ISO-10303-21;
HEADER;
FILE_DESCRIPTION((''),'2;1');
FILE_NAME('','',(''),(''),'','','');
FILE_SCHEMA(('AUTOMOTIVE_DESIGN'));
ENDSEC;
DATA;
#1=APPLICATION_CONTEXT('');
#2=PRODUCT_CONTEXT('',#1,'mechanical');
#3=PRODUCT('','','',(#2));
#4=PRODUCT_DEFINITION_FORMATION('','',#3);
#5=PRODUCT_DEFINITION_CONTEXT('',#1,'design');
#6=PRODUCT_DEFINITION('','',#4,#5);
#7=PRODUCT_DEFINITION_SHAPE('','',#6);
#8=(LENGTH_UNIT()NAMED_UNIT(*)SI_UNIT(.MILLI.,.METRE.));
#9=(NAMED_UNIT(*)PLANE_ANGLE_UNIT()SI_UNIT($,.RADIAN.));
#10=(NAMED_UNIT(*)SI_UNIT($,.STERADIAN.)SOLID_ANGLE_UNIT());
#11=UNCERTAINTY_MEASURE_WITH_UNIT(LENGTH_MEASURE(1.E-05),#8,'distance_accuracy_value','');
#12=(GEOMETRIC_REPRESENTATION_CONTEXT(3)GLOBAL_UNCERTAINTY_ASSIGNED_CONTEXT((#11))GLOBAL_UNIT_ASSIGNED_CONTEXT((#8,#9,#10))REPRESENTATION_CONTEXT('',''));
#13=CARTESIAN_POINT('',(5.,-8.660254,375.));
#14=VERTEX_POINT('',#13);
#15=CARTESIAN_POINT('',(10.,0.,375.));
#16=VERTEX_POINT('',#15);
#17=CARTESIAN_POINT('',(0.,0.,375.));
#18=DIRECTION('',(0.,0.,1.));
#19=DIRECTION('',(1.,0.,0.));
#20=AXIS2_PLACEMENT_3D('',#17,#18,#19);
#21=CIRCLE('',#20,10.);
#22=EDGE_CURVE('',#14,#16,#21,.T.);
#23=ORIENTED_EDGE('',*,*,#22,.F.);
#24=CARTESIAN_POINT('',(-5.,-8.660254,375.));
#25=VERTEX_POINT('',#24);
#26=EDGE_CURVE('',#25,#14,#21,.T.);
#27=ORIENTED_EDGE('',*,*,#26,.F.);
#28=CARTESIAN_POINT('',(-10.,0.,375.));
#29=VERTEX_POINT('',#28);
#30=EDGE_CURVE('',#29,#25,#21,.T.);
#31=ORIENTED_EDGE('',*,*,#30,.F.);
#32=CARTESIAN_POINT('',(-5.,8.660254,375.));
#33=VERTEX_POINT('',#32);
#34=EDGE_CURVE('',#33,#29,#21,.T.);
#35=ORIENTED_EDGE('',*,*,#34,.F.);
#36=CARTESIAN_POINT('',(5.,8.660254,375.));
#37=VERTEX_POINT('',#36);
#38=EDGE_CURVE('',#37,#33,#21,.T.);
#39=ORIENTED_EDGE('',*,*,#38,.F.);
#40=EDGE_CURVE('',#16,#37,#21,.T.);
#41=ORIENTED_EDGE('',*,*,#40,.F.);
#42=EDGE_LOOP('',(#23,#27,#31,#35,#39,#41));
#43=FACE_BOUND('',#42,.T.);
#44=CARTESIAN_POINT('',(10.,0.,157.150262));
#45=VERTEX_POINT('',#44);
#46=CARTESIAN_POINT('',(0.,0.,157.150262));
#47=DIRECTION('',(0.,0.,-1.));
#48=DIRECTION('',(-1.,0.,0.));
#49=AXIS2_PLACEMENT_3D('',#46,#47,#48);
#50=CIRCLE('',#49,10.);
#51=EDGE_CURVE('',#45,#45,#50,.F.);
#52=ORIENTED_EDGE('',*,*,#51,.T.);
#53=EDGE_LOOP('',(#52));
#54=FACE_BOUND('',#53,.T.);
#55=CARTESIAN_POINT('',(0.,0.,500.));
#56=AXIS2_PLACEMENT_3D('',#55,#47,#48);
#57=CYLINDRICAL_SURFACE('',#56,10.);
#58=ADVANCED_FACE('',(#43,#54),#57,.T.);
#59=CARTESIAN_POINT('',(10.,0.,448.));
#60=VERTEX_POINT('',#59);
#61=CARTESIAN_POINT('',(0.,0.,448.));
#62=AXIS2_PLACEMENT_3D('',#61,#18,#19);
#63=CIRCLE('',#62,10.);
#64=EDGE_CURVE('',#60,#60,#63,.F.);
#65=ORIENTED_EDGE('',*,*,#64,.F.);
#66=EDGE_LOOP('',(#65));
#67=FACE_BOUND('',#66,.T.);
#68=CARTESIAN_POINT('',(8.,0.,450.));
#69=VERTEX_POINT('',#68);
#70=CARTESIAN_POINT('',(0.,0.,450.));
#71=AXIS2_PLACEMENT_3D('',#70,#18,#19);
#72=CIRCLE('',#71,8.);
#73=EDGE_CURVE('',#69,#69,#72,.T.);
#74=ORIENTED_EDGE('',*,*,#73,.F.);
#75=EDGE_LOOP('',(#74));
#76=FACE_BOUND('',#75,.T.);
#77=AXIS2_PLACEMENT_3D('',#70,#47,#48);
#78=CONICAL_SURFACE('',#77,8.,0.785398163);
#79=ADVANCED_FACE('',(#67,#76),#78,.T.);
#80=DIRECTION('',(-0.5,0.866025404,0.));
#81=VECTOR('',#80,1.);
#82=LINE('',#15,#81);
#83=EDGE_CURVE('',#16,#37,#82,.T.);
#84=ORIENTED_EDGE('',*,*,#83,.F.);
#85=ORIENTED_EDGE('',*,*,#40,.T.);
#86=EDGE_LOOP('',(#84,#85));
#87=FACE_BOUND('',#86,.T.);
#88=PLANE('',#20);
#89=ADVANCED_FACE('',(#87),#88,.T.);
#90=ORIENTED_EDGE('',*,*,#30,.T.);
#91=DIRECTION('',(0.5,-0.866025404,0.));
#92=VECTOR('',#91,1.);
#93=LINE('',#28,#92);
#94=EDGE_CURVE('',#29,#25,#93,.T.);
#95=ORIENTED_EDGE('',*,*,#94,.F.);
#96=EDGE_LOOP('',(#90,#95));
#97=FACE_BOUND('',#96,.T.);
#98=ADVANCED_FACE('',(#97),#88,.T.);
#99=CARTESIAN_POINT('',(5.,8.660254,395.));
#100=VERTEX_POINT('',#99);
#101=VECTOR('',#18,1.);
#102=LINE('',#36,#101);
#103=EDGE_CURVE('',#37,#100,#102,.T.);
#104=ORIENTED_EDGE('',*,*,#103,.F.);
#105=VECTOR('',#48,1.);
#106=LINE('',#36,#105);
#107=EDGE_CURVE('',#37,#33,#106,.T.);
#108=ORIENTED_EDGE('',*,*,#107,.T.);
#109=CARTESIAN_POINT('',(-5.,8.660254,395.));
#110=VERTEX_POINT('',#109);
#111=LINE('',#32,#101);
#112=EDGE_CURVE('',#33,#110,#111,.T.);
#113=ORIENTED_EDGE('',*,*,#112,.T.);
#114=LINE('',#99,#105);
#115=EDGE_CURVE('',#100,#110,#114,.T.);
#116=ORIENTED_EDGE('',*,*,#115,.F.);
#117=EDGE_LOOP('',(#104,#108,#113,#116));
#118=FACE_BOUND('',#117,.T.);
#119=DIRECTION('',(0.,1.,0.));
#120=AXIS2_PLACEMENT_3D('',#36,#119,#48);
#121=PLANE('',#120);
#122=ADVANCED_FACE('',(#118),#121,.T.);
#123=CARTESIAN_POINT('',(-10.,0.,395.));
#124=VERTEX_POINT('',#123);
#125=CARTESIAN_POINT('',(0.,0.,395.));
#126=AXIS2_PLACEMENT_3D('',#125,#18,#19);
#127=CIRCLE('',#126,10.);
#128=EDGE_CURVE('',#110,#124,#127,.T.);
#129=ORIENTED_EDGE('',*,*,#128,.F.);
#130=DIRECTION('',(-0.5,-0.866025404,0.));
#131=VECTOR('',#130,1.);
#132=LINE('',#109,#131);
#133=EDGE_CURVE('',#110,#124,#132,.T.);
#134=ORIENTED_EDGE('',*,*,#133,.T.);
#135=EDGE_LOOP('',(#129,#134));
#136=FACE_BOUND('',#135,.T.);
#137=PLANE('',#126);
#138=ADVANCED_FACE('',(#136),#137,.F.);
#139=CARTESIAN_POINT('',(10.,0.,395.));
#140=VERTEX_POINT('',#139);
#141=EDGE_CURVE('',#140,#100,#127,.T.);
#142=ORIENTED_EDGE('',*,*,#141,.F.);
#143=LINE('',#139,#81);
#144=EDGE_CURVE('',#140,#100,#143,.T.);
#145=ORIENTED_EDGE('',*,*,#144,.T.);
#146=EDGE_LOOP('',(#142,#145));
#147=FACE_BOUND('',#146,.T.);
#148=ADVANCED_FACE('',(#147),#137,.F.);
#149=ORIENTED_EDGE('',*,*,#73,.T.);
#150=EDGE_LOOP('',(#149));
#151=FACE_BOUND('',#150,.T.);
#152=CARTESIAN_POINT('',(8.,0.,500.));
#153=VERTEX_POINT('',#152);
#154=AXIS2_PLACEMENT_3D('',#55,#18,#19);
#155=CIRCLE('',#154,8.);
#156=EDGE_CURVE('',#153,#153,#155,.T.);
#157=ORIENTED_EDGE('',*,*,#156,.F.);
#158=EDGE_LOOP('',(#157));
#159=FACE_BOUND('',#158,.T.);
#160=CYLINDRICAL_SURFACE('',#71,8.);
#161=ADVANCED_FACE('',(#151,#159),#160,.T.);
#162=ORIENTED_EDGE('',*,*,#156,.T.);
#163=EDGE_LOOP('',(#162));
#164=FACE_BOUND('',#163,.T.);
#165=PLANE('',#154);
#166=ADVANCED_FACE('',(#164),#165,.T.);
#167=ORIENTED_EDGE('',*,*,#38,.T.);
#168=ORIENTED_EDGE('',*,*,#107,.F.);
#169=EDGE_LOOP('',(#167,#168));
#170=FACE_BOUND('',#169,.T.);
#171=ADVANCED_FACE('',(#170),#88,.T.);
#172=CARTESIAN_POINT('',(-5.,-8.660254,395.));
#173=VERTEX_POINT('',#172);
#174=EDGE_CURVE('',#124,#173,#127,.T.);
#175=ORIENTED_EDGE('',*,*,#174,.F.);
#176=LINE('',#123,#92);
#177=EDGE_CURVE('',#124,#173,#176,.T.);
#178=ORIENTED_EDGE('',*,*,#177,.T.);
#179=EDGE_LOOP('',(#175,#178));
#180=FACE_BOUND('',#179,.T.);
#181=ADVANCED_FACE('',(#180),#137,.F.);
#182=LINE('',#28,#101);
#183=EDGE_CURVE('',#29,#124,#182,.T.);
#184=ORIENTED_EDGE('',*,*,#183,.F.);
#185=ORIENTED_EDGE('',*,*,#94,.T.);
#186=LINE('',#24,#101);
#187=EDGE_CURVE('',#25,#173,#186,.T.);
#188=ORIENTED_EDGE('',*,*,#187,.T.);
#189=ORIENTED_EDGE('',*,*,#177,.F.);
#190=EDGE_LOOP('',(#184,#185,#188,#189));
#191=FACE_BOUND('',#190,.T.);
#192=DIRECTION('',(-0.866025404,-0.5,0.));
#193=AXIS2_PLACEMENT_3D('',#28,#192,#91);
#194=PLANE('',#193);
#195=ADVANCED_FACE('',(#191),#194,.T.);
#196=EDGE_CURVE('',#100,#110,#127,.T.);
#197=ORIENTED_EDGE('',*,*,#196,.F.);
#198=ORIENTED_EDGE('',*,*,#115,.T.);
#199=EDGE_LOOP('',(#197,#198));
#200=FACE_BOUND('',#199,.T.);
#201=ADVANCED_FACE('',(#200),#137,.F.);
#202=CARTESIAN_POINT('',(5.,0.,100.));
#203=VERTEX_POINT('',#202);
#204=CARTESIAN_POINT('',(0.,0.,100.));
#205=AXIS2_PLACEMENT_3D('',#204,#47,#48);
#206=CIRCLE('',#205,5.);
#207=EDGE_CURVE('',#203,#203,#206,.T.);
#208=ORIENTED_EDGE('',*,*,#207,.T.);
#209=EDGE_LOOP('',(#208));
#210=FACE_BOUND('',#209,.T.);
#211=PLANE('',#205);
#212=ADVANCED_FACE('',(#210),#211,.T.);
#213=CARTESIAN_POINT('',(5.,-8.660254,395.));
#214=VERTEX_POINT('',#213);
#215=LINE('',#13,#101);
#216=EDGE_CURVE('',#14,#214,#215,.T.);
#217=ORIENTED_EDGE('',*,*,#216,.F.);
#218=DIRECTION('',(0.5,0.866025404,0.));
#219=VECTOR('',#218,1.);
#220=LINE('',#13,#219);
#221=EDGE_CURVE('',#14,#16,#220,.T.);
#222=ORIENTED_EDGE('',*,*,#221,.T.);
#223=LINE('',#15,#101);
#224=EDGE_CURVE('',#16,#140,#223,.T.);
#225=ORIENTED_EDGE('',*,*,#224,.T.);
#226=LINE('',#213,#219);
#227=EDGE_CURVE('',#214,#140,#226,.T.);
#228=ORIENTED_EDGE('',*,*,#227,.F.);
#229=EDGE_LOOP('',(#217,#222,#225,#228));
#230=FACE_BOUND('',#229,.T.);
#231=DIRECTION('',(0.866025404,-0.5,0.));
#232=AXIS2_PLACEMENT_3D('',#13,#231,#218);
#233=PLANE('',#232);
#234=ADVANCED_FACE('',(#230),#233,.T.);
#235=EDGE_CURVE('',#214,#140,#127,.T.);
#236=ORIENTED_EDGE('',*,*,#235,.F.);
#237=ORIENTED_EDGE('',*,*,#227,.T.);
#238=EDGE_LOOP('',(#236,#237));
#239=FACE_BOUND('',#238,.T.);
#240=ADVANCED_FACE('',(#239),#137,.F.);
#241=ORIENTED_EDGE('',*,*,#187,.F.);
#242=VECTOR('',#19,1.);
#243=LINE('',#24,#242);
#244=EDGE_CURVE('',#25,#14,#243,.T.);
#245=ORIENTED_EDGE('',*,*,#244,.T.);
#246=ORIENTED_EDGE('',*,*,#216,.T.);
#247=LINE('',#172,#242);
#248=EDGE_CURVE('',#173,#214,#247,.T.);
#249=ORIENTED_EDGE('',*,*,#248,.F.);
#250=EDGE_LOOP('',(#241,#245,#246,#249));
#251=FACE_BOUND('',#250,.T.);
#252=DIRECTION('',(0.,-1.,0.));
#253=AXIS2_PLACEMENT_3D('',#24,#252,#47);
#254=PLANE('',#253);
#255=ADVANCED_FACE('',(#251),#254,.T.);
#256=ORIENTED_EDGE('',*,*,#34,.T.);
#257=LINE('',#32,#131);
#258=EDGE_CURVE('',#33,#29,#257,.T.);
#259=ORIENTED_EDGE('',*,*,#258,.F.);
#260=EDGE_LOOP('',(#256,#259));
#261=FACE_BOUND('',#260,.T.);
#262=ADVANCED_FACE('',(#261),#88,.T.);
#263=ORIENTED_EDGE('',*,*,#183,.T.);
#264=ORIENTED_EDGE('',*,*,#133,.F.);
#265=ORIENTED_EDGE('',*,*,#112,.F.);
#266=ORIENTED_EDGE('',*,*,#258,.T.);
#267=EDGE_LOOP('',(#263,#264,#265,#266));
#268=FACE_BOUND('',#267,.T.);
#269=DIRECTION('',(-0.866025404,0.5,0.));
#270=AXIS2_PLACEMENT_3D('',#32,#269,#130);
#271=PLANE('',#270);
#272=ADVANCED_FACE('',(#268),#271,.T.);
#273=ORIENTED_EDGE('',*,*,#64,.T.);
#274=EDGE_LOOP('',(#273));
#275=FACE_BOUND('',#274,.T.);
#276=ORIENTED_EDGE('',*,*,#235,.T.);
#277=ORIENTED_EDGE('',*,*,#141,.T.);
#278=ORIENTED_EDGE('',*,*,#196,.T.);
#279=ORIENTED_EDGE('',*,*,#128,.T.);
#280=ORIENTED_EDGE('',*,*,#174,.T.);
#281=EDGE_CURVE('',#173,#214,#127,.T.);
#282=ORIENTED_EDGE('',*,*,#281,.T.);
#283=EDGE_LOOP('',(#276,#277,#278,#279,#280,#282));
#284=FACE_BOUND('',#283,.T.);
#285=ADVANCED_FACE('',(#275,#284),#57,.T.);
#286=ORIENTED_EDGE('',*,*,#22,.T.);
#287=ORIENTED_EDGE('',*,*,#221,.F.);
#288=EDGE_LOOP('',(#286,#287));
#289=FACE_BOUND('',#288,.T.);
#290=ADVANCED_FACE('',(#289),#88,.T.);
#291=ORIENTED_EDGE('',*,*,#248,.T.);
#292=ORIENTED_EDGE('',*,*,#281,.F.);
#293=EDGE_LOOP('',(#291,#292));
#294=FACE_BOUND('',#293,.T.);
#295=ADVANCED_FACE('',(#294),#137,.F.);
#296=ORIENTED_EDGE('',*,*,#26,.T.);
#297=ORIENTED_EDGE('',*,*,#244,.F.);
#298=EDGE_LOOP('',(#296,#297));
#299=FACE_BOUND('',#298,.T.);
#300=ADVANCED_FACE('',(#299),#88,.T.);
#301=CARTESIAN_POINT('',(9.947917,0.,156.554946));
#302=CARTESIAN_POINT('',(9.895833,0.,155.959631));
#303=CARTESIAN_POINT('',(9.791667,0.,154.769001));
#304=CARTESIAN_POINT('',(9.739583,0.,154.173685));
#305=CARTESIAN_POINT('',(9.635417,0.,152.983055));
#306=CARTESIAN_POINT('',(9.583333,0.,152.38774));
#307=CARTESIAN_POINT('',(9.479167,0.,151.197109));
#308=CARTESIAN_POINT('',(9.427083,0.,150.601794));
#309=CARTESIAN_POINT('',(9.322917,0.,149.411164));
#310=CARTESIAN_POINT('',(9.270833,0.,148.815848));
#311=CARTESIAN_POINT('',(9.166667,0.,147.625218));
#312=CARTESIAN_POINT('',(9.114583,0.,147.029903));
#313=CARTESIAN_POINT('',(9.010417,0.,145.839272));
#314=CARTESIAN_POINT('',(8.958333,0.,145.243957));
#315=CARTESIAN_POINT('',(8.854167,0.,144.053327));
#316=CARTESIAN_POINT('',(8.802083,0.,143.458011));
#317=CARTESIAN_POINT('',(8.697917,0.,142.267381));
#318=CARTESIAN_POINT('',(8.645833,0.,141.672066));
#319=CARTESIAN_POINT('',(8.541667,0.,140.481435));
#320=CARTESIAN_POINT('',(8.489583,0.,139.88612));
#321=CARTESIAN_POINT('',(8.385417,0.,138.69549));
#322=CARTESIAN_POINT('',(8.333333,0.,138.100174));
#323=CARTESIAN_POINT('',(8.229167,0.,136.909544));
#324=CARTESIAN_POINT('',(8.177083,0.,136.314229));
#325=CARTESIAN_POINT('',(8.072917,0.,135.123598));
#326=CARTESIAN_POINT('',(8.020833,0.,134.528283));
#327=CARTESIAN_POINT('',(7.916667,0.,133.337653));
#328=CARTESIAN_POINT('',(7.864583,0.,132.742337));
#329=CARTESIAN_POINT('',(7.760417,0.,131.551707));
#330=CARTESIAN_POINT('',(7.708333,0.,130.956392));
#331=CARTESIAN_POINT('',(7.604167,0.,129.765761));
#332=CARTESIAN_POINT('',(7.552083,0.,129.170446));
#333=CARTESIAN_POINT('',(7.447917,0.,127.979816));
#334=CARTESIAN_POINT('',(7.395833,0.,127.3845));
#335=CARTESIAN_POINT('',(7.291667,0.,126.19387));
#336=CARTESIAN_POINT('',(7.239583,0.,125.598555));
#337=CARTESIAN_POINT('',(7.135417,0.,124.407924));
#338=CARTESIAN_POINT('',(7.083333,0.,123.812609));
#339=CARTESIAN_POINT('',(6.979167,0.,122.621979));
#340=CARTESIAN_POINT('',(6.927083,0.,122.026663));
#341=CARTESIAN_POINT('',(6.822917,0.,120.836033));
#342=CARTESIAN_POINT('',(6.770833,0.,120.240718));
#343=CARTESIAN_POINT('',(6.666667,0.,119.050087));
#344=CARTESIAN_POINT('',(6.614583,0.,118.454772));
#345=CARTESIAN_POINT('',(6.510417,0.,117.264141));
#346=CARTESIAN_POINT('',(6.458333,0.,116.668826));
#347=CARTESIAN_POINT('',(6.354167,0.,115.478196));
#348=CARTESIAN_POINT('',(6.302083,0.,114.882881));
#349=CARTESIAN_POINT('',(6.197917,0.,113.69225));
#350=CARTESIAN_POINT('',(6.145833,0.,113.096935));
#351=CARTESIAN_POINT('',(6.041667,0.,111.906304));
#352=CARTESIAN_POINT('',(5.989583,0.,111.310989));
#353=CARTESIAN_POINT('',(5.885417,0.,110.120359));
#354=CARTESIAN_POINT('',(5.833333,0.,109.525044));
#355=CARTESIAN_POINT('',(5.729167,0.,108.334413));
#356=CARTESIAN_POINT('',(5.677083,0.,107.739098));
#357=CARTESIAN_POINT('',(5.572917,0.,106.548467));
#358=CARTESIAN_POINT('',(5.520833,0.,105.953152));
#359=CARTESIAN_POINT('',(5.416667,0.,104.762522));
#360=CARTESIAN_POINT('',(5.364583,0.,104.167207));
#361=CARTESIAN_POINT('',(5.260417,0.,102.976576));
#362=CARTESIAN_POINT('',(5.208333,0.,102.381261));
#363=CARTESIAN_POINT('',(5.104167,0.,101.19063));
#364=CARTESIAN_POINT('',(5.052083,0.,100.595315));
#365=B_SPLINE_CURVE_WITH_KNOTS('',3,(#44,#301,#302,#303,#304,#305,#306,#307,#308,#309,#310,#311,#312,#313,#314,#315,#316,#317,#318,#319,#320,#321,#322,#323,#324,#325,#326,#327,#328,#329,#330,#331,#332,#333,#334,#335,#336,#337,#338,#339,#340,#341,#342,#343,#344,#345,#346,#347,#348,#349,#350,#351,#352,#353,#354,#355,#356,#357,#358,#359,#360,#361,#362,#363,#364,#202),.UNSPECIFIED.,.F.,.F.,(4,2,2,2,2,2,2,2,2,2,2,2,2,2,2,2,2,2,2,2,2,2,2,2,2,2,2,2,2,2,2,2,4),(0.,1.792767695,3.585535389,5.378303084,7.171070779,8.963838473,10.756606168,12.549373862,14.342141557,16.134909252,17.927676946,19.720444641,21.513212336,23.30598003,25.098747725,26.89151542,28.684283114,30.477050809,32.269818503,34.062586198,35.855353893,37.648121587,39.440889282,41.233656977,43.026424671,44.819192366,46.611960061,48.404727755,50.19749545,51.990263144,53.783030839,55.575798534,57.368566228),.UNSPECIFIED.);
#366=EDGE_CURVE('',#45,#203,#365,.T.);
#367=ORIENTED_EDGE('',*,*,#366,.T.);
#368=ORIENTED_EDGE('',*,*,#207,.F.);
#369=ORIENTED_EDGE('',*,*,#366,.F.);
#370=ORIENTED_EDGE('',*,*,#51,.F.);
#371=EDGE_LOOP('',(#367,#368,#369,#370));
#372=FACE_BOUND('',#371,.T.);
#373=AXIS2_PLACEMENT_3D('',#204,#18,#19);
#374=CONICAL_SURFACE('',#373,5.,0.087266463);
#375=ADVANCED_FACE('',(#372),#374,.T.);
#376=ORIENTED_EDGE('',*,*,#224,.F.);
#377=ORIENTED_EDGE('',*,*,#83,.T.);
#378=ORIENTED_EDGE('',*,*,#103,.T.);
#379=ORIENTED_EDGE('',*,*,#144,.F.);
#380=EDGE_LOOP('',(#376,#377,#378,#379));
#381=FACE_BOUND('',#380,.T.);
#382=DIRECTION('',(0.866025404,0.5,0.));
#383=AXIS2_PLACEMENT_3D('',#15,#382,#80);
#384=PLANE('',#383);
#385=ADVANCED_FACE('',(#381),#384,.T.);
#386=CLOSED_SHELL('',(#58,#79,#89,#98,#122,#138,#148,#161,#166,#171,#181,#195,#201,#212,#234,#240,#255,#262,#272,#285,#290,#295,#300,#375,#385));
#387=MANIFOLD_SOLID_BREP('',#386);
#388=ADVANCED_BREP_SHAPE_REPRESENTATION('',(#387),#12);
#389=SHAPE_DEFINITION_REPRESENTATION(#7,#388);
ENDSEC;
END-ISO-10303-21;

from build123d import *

# Parameters (mm, degrees)
SKETCH1_R          = 10
EXTRUDE1_DEPTH     = 500
CHAMFER1_SIZE      = 2
SKETCH2_R          = 43.013092774
SKETCH2_R_2        = 8
CUT_EXTRUDE1_DEPTH = 50
CHAMFER2_SIZE      = 2
SKETCH3_R          = 224.622331413
REMOVE_DEPTH       = 600
SKETCH4_R          = 20
HEX_2_DEPTH        = 20
CHAMFER3_SIZE      = 5
CHAMFER3_SIZE2     = 57.150261514


with BuildPart() as part:
    # Sketch1 → Extrude1 (new, symmetric)
    with BuildSketch(Plane.XY):
        Circle(SKETCH1_R)
    extrude(amount=EXTRUDE1_DEPTH, both=True)

    # Chamfer1
    chamfer1_edges = [part.edges().sort_by_distance(p)[0] for p in [
        (-10, 0, -500),
        (-10, 0, 500),
    ]]
    chamfer(chamfer1_edges, length=CHAMFER1_SIZE)

    # Sketch2 → Cut-Extrude1 (cut)
    with BuildSketch(Plane.XY.offset(500)):
        Circle(SKETCH2_R)
        Circle(SKETCH2_R_2, mode=Mode.SUBTRACT)
    extrude(amount=-CUT_EXTRUDE1_DEPTH, mode=Mode.SUBTRACT)

    # Chamfer2
    chamfer2_edges = [part.edges().sort_by_distance(p)[0] for p in [
        (-10, 0, 450),
    ]]
    chamfer(chamfer2_edges, length=CHAMFER2_SIZE - 0.0001)  # a hair under: the kernel refuses the full size

    # Sketch3 → remove (cut)
    with BuildSketch(Plane(origin=(0, 0, -500), x_dir=(-1, 0, 0), z_dir=(0, 0, -1))):
        Circle(SKETCH3_R)
    extrude(amount=-REMOVE_DEPTH, mode=Mode.SUBTRACT)

    # Sketch4 → hex 2 (cut)
    with BuildSketch(Plane.XY.offset(395)):
        Circle(SKETCH4_R)
        Polygon((5, 8.660254038), (-5, 8.660254038), (-10, 0), (-5, -8.660254038), (5, -8.660254038), (10, 0), align=None, mode=Mode.SUBTRACT)
    extrude(amount=-HEX_2_DEPTH, mode=Mode.SUBTRACT)

    # Chamfer3
    chamfer3_edges = [part.edges().sort_by_distance(p)[0] for p in [
        (-10, 0, 100),
    ]]
    chamfer3_side = [part.faces().sort_by_distance(p)[0] for p in [
        (0, 0, 100),
    ]]
    chamfer(chamfer3_edges, length=CHAMFER3_SIZE, length2=CHAMFER3_SIZE2, reference=chamfer3_side[0])


solid = part.part
